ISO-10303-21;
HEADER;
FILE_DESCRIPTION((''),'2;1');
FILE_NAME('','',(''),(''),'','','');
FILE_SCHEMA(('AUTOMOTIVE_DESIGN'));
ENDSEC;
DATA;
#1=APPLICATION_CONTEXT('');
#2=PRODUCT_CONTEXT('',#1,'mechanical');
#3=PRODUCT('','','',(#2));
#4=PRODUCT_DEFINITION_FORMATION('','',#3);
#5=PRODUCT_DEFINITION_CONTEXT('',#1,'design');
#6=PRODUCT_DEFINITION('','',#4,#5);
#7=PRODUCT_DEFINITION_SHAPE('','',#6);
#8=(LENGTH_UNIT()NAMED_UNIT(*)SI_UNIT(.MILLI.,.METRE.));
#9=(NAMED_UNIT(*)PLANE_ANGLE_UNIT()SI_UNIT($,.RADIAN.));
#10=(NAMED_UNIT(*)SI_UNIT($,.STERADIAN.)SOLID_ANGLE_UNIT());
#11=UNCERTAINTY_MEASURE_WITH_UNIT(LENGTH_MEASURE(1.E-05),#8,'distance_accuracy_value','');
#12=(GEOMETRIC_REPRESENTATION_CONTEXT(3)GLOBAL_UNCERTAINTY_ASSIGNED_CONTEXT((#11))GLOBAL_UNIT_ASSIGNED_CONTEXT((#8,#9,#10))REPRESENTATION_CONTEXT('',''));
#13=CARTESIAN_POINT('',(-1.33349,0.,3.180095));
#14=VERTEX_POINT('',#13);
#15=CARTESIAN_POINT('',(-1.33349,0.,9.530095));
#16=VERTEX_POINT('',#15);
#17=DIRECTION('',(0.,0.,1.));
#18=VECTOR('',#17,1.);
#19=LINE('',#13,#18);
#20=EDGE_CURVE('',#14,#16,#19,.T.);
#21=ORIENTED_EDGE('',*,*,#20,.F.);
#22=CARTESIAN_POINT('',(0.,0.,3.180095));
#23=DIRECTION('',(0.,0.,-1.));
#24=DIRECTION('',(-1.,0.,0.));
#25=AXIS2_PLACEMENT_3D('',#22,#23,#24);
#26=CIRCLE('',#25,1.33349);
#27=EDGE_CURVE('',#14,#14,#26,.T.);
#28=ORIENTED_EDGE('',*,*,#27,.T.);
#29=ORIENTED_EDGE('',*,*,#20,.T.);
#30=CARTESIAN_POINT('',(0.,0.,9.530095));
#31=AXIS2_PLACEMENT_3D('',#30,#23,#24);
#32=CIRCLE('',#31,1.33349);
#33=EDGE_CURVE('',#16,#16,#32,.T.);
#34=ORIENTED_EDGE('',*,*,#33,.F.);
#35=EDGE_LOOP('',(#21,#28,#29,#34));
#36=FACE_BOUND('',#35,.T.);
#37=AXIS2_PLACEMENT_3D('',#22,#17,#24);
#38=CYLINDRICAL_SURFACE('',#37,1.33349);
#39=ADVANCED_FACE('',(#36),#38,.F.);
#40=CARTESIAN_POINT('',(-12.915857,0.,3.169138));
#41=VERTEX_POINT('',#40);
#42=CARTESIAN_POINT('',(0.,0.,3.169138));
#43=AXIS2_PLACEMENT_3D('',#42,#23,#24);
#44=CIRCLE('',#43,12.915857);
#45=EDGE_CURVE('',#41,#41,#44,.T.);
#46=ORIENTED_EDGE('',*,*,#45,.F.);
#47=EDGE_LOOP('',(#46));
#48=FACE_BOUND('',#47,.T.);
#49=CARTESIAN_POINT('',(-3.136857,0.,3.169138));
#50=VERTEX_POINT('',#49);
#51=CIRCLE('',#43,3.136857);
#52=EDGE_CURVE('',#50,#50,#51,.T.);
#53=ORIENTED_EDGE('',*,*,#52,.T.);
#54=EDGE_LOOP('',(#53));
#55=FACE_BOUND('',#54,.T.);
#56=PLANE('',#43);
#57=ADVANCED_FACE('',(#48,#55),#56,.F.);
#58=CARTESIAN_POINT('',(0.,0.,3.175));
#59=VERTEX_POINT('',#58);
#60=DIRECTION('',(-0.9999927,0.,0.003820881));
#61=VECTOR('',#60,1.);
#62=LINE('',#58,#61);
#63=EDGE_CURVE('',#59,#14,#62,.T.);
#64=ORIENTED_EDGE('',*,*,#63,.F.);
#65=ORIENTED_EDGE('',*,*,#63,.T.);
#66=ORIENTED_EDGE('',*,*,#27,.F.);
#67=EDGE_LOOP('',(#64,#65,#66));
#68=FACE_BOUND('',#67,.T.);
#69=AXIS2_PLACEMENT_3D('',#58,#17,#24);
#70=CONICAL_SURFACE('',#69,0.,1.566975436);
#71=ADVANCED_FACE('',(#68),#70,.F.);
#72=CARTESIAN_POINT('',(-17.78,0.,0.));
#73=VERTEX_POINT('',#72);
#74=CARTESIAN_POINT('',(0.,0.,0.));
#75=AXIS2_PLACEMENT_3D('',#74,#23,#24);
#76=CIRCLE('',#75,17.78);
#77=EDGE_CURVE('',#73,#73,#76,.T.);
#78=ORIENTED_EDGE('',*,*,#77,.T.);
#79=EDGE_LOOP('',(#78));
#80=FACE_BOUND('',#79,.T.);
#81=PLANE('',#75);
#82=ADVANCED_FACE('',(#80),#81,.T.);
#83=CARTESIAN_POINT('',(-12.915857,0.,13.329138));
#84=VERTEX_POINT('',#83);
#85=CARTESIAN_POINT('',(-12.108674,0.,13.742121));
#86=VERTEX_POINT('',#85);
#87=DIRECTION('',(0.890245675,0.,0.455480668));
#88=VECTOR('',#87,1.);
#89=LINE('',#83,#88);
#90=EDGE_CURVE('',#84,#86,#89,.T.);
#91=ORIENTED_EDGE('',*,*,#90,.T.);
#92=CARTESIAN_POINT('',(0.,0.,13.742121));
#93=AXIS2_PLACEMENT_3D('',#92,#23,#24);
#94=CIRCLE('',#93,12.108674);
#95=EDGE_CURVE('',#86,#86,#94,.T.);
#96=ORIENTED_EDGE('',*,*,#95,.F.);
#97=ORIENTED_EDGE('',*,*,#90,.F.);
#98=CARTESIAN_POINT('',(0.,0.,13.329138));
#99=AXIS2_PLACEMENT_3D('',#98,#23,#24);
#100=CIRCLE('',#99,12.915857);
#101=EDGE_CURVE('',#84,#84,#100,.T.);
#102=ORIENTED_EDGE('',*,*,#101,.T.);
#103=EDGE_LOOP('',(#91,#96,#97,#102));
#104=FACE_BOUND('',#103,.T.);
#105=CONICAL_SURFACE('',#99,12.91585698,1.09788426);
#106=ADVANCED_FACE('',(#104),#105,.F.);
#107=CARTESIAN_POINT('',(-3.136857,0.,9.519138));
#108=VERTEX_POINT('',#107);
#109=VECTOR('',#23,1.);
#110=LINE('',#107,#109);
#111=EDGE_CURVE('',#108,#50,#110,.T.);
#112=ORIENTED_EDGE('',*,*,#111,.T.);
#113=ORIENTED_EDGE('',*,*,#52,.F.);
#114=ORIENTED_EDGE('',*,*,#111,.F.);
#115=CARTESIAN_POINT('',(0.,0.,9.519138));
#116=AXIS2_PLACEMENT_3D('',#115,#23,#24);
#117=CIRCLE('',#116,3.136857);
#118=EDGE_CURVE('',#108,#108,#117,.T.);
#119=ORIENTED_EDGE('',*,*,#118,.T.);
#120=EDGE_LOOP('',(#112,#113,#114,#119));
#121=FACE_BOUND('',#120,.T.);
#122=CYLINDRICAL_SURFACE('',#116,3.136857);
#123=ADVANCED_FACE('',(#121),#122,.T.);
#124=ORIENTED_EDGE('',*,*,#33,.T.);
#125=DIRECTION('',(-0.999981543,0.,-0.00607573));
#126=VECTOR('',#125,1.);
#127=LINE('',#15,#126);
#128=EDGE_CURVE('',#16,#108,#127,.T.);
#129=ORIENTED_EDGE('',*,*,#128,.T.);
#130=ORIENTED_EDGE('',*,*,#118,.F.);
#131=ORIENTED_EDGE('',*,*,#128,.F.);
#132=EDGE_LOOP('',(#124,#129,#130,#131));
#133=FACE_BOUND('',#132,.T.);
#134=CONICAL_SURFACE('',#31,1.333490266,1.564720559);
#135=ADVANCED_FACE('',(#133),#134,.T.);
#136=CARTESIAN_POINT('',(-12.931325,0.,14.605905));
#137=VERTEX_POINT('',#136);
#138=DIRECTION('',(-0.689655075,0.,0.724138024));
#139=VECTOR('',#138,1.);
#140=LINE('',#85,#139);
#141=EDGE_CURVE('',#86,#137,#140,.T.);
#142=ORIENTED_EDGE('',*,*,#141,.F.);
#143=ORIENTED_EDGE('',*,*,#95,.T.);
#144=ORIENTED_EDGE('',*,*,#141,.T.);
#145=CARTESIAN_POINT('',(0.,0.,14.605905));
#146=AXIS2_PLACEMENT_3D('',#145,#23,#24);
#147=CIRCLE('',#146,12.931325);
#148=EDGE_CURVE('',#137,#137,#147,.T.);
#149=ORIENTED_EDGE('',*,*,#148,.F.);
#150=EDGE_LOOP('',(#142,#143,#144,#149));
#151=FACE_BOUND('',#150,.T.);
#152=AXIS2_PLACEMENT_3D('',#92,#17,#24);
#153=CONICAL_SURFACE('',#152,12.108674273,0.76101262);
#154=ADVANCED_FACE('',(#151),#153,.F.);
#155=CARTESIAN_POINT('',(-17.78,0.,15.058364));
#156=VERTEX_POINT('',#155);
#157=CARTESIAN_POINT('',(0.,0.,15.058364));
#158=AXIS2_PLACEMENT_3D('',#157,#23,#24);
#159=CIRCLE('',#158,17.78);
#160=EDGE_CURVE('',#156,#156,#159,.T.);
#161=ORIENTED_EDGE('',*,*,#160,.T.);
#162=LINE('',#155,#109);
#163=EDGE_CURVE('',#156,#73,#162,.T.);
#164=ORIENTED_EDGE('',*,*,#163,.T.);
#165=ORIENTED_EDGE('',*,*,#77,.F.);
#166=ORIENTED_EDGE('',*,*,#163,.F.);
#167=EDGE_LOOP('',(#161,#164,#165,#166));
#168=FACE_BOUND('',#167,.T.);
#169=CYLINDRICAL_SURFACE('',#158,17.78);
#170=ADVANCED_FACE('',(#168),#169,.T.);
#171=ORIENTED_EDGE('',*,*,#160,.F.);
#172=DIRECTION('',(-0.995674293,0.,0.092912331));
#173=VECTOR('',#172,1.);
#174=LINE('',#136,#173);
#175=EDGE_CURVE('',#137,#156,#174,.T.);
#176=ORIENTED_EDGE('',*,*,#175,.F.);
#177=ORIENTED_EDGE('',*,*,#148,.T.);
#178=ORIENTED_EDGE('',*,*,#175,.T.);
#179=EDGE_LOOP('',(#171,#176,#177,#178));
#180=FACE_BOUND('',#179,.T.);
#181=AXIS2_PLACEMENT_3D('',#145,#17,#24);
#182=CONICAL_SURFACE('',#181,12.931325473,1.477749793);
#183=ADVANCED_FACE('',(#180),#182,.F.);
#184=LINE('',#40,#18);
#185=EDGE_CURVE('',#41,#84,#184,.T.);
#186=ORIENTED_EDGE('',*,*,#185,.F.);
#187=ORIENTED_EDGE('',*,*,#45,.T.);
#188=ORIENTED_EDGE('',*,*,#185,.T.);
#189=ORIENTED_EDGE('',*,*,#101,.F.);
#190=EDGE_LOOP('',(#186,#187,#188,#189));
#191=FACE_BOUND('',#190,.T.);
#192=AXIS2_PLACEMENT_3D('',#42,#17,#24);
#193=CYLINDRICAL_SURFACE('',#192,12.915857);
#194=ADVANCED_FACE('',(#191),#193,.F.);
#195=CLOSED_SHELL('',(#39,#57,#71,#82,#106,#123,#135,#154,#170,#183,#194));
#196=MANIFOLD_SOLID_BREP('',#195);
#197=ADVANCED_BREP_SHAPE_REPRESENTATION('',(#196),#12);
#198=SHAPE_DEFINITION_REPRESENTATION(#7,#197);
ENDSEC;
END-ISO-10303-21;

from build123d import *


# Not quite as in the source:
# - the program builds the solid bodies; features that only make, move or delete a surface that nothing else refers to are left out


with BuildPart() as f3:
    # F0 (on Front) → F3 (revolve)
    with BuildSketch(Plane.XZ):
        Polygon((-17.78, 15.0583637878), (-17.78, 13.335), (-17.78, 0), (0, 0), (0, 3.175), (-1.333490266, 3.1800951451), (-1.333490266, 9.5300951451), (-3.1368569799, 9.5191381732), (-3.1368569799, 3.1691381732), (-12.9158569799, 3.1691381732), (-12.9158569799, 13.3291381732), (-12.1086742729, 13.7421209365), (-12.9313254729, 14.6059049293), align=None)
    revolve(axis=Axis((0, 0, 1.5875), (0, 0, -1)))


solid = f3.part
